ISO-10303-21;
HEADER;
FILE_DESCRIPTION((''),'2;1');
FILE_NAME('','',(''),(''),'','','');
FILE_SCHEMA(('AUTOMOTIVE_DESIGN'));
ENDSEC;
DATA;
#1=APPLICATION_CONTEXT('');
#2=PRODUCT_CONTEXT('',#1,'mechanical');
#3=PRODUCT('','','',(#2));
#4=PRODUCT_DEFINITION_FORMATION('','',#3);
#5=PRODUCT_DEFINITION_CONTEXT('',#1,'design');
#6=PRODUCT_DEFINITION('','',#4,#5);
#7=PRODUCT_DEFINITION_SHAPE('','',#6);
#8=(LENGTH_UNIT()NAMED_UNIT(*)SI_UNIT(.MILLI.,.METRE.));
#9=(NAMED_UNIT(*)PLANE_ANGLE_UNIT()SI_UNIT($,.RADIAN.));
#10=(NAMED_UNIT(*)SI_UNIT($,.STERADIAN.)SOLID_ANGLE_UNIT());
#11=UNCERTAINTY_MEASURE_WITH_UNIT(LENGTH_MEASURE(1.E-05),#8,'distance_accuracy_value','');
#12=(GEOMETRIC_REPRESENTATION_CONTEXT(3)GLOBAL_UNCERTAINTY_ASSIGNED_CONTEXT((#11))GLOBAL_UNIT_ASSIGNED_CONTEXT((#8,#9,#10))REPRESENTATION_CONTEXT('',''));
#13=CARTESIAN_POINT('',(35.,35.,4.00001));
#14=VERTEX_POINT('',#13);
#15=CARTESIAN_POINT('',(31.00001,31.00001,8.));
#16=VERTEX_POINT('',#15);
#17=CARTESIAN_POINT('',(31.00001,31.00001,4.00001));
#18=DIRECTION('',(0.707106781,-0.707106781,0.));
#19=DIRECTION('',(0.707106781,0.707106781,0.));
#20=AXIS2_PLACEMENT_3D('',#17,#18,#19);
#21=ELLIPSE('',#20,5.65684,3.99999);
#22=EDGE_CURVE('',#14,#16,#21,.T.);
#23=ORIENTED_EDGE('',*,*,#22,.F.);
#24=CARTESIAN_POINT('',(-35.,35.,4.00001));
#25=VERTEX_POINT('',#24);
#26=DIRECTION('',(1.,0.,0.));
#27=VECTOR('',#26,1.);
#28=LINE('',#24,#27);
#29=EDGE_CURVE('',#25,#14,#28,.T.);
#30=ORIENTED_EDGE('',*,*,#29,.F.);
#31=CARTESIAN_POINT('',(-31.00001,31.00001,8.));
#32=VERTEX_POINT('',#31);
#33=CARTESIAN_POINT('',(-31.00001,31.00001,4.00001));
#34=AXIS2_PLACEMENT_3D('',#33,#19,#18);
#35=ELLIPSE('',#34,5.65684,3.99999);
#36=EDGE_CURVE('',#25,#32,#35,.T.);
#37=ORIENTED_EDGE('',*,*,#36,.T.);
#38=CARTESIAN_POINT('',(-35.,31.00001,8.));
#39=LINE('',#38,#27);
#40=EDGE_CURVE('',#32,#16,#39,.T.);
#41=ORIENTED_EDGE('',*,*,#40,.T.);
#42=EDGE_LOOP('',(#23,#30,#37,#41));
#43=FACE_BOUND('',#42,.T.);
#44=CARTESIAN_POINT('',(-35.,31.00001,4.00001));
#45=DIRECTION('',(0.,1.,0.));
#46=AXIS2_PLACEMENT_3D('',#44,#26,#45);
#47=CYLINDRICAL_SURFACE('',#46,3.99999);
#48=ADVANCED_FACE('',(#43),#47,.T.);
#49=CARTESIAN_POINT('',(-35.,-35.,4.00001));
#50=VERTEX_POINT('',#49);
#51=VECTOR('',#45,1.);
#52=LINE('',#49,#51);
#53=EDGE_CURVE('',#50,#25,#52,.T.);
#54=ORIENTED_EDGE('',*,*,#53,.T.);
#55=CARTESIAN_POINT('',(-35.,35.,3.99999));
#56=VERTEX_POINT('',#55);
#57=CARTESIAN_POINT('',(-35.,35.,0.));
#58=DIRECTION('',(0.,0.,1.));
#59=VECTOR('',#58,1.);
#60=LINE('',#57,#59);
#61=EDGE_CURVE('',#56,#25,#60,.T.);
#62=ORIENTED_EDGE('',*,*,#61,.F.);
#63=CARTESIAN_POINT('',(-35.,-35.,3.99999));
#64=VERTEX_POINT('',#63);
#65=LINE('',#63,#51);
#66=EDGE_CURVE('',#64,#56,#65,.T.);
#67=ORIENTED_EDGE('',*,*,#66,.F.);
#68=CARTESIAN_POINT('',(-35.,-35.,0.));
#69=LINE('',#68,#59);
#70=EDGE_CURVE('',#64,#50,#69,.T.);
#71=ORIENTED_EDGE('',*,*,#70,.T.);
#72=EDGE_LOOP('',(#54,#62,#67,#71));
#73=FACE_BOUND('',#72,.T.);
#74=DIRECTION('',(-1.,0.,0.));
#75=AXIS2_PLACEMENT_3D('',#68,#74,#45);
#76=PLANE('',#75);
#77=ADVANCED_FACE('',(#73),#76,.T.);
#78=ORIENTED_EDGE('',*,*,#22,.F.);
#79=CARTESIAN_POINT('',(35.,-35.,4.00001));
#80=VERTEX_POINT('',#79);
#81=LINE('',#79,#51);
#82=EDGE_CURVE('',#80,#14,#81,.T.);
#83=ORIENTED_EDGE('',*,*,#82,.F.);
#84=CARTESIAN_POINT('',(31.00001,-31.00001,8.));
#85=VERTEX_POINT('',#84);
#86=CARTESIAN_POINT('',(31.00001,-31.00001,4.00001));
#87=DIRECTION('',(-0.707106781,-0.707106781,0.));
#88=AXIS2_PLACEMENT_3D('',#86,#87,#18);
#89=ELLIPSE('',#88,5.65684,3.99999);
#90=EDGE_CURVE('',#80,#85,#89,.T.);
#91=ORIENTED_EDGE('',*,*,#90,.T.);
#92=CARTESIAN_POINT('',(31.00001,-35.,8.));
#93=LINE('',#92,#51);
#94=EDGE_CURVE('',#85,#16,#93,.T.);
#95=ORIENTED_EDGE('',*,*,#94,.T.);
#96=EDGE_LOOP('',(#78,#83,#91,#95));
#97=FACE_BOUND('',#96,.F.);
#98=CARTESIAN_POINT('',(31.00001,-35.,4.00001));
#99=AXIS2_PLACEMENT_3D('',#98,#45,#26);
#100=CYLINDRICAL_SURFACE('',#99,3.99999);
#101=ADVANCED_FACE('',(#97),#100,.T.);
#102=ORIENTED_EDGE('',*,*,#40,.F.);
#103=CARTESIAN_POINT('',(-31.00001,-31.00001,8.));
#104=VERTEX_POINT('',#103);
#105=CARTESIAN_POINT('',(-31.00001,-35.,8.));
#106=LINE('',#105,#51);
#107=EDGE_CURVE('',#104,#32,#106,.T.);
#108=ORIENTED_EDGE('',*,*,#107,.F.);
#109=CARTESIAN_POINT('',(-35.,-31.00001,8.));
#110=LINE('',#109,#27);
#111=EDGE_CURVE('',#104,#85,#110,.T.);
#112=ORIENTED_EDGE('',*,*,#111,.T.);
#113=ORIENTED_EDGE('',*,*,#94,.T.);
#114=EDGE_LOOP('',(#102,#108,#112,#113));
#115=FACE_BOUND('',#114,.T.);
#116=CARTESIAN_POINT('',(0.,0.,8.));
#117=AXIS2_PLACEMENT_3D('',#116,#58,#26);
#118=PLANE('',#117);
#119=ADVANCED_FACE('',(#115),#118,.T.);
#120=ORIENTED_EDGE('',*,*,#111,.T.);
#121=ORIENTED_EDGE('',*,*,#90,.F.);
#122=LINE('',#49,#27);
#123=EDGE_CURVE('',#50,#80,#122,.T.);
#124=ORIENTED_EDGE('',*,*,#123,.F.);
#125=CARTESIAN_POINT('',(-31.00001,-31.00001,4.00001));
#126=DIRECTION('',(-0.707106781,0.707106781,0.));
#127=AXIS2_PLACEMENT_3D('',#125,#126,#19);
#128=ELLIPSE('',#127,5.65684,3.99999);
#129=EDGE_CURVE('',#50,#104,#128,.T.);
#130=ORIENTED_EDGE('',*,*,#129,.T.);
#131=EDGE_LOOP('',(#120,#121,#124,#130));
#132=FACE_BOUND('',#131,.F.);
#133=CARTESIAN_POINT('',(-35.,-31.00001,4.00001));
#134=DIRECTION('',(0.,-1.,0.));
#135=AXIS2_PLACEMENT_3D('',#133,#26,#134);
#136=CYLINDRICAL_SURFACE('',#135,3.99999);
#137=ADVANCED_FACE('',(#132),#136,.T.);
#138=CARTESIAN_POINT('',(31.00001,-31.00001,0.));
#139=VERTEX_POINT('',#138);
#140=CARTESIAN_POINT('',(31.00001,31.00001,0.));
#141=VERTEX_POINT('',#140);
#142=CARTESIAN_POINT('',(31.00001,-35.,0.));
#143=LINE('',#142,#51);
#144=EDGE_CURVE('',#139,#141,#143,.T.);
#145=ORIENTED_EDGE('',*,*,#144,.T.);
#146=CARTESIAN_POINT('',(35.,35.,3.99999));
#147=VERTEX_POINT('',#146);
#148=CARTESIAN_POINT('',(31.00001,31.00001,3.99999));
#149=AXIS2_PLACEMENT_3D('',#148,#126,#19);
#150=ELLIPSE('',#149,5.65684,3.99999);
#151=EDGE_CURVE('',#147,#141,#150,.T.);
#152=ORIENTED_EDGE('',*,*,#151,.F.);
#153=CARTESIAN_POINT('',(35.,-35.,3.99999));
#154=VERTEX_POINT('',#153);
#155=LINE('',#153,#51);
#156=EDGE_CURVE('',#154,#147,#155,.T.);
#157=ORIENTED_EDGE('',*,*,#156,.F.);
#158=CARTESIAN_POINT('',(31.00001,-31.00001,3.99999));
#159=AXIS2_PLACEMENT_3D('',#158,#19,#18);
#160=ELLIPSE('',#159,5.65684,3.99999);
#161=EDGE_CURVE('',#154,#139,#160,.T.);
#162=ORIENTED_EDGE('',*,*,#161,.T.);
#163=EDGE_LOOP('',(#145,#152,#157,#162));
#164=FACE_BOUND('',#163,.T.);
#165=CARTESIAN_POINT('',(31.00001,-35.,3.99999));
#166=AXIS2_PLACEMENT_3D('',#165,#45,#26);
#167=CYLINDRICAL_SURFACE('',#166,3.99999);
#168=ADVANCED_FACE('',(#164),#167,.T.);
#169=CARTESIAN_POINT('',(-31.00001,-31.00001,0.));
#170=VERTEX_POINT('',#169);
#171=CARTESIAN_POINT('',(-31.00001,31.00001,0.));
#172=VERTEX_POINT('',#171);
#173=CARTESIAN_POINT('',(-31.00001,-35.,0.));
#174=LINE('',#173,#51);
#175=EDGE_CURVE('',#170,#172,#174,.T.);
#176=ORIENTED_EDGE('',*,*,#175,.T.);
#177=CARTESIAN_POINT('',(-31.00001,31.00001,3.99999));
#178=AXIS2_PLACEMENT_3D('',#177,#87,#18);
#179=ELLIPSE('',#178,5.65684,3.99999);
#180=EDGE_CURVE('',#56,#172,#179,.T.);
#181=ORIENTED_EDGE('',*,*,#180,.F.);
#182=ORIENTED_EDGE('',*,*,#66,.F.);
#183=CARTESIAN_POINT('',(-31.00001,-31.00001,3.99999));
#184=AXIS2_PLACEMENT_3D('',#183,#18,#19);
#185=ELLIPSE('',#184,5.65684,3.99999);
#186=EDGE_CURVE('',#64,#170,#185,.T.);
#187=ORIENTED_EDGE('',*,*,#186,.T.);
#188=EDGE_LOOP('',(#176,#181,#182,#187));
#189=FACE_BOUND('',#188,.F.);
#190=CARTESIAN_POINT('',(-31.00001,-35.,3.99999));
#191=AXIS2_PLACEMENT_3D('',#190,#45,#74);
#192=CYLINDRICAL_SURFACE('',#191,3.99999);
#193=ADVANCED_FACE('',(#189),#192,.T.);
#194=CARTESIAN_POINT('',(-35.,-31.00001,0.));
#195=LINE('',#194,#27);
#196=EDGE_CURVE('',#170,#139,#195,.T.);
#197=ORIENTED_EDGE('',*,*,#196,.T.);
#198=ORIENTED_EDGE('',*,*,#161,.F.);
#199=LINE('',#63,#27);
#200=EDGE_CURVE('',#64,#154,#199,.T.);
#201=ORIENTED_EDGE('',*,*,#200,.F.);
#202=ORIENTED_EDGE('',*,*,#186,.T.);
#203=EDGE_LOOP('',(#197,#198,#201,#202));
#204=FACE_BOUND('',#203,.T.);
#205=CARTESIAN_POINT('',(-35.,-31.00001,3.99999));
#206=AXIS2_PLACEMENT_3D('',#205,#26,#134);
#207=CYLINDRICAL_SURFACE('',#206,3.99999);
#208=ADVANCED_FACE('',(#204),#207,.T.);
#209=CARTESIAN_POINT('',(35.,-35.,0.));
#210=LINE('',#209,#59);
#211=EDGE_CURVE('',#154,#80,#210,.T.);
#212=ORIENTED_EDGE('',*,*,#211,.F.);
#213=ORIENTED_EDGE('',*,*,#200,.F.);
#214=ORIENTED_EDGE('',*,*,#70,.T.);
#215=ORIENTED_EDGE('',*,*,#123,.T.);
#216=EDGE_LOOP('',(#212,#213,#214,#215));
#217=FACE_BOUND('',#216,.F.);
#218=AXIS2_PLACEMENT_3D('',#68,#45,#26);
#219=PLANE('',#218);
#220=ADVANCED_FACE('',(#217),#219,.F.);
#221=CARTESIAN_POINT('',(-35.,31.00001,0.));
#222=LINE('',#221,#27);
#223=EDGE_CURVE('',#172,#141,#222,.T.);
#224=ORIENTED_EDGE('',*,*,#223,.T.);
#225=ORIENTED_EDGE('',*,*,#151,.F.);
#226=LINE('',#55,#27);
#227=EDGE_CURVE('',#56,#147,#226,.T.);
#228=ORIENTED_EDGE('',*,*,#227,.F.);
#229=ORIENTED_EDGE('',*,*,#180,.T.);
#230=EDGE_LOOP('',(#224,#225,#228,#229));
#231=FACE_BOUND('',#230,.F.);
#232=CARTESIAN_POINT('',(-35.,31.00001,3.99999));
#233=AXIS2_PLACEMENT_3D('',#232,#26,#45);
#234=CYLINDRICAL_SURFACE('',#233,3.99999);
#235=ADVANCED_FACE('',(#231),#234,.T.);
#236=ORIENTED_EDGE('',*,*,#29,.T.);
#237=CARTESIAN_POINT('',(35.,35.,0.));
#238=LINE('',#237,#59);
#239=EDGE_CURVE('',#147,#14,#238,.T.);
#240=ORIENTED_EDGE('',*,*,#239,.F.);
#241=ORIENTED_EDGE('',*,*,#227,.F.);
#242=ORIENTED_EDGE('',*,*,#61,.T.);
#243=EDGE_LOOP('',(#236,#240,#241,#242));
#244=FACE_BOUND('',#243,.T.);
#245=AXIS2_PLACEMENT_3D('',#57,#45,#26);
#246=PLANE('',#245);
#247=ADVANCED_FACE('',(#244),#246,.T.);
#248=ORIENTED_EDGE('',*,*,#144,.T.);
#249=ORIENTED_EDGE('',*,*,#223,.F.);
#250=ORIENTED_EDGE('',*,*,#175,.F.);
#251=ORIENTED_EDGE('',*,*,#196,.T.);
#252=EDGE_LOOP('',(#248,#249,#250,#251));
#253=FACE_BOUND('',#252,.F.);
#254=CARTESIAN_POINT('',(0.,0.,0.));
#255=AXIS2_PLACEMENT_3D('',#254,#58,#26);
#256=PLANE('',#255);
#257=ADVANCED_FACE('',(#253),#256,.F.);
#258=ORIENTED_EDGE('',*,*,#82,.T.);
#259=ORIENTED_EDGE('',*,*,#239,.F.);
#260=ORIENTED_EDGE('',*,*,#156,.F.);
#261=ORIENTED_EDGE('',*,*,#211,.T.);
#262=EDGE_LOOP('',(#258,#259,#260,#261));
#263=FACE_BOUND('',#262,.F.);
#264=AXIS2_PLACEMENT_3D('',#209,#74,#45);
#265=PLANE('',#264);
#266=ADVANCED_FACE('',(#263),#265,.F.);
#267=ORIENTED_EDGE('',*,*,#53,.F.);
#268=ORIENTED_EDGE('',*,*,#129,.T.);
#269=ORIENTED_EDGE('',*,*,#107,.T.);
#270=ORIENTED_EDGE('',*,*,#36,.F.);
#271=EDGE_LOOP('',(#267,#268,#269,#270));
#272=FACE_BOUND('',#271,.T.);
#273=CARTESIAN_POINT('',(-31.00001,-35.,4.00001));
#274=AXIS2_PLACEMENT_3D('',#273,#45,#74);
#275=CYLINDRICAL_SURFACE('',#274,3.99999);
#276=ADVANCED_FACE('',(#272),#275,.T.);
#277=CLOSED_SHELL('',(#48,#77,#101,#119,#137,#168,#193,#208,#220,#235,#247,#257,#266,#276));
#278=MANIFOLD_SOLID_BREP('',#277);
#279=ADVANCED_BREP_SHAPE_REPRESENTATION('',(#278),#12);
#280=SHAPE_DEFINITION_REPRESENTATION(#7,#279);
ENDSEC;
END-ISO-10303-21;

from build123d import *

# Parameters (mm, degrees)
F0_W     = 70
F0_H     = 70
F1_DEPTH = 8
F2_R     = 3.99999


# Not quite as in the source:
# - a fillet or chamfer is up to 0.001 mm smaller than in the source, because OpenCascade refuses the exact size


with BuildPart() as f1:
    # F0 (on Top) → F1 (new body)
    with BuildSketch(Plane.XY):
        Rectangle(F0_W, F0_H)
    extrude(amount=F1_DEPTH)

    # F2 (radius 4 in the source; OpenCascade refuses exactly that, so slightly less here)
    f2_edges = [f1.edges().sort_by_distance(p)[0] for p in [
        (0, -35, 8),
        (35, 0, 8),
        (0, 35, 8),
        (-35, 0, 8),
        (0, 35, 0),
        (-35, 0, 0),
        (0, -35, 0),
        (35, 0, 0),
    ]]
    fillet(f2_edges, radius=F2_R)


solid = f1.part
